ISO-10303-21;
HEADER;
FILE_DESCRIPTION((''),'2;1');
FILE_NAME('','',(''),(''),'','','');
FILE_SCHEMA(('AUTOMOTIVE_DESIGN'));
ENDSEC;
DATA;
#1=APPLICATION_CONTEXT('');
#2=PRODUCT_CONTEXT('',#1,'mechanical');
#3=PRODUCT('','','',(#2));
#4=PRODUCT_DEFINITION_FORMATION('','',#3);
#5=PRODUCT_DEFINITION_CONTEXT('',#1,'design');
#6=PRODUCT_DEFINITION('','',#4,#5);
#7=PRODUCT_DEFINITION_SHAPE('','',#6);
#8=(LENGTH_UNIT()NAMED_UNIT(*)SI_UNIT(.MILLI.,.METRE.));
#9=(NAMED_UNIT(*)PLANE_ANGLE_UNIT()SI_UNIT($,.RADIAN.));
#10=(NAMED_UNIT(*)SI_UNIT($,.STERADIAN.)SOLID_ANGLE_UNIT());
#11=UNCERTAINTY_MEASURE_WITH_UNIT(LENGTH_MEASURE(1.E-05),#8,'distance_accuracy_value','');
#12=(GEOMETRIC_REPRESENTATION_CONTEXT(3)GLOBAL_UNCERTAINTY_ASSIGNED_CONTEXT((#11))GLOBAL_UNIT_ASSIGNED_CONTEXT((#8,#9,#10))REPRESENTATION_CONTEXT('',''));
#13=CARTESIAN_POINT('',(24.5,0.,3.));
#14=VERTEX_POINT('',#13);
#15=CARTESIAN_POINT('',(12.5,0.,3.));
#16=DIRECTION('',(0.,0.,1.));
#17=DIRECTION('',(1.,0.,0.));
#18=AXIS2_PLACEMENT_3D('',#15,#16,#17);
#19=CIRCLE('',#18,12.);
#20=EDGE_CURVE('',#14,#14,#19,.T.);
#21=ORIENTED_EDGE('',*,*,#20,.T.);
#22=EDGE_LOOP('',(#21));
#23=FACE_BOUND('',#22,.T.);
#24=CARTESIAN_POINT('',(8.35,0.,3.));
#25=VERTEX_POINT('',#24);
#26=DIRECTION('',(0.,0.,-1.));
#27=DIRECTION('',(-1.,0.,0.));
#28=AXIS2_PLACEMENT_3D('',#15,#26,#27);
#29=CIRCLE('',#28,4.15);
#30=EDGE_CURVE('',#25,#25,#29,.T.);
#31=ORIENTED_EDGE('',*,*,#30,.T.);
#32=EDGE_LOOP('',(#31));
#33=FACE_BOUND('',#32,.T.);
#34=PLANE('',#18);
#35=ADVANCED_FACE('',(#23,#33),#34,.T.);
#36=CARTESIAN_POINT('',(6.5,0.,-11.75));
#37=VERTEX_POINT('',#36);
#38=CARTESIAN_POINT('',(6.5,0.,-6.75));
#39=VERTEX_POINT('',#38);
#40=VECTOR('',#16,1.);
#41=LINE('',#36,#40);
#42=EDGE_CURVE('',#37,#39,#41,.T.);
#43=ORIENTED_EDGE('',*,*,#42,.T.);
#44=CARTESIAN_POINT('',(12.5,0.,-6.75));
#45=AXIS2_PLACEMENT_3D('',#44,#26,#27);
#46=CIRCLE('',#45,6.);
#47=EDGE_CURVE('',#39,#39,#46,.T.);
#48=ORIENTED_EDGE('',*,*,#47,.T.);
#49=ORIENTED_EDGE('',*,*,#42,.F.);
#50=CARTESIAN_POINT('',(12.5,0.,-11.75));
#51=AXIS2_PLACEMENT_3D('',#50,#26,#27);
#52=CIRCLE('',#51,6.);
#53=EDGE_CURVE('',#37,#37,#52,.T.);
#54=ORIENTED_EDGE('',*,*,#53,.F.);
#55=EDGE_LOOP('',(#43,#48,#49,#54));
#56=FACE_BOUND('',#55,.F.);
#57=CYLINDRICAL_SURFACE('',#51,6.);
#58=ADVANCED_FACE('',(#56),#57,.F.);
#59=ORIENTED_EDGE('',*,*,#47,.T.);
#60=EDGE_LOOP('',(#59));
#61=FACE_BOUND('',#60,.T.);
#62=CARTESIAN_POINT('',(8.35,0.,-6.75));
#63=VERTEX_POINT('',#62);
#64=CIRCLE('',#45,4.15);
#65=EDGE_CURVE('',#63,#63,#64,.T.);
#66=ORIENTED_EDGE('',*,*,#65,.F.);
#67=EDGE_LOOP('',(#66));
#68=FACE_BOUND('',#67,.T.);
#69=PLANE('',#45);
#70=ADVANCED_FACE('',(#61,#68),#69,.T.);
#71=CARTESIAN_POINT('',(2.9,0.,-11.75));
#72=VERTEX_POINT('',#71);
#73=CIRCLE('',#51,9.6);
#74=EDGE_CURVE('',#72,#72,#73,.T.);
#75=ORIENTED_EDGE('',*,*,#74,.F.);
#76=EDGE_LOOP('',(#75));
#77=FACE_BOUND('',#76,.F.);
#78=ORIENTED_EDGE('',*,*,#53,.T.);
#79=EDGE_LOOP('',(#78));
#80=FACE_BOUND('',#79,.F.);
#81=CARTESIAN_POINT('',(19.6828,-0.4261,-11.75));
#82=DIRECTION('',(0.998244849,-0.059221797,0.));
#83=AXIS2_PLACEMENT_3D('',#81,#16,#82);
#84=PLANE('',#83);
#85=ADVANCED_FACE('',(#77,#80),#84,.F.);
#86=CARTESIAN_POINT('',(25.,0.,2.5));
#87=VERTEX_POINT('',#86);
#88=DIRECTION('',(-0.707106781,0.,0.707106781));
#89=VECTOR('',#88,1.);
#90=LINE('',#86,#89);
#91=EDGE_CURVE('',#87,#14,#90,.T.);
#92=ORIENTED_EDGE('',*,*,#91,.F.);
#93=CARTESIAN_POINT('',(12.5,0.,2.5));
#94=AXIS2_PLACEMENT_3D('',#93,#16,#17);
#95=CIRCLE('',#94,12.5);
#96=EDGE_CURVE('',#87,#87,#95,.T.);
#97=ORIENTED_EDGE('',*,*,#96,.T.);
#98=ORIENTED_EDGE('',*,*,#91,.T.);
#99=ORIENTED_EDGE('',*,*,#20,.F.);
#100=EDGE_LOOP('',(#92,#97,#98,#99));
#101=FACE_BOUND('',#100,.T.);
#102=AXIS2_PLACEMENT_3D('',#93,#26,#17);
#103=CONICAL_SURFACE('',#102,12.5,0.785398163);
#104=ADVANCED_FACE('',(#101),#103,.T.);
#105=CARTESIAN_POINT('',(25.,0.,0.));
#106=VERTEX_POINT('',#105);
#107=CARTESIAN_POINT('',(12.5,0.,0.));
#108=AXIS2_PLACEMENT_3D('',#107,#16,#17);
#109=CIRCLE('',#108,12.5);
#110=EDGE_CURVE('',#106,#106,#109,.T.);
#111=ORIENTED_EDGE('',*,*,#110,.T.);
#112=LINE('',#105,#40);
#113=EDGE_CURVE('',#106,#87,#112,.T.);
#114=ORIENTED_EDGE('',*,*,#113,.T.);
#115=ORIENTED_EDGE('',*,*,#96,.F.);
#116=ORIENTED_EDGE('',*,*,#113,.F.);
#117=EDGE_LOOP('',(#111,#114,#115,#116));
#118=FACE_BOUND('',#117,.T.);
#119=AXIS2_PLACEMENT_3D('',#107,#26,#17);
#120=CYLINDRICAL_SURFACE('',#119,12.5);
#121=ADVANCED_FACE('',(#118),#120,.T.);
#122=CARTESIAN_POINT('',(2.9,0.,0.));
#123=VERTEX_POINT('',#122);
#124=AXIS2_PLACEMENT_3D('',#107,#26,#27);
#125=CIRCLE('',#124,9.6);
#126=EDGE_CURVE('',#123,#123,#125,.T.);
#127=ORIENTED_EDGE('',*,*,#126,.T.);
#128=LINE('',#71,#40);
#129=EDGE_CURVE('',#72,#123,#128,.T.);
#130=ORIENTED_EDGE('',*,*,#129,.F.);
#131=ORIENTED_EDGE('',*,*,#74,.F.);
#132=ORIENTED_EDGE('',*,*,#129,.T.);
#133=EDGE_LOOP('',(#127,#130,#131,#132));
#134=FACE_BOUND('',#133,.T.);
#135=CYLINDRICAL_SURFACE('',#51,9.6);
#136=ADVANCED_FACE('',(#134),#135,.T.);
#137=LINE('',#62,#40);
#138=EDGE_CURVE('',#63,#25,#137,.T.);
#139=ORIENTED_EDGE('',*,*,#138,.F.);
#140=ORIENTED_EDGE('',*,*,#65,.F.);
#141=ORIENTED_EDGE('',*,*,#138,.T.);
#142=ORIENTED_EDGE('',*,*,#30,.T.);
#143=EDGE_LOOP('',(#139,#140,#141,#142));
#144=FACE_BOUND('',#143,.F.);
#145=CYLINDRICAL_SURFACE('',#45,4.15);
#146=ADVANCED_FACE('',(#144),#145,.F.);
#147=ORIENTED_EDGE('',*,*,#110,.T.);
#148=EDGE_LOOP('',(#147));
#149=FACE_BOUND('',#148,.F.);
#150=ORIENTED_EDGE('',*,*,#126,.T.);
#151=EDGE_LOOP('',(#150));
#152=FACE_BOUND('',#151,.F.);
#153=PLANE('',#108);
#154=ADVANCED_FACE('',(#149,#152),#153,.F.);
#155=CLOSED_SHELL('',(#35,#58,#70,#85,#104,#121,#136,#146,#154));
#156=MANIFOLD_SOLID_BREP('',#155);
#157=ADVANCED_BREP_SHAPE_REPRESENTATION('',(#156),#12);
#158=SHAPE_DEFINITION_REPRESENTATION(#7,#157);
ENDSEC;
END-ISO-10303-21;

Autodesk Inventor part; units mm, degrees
ref_plane "YZ Plane" through (0, 0, 0) normal (1, 0, 0) x (0, 1, 0)
ref_plane "XY Plane" through (0, 0, 0) normal (0, 0, 1) x (1, 0, 0)
ref_plane "РабПлоскость1" through (19.6828, -0.4261, 0) normal (0, 0, 1) x (0.9982449, -0.0592218, 0)
sketch "Эскиз1" plane through (19.6828, -0.4261, 0) normal (0, 0, 1) x (0.9982449, -0.0592218, 0)
  circle A0 centre (-7.1954, 0) radius 10 projected
  circle A1 centre (-7.1954, 0) radius 12.5 projected
  point P0 (-19.6734, -0.7403)
  point P1 (0.3275, 9.9828)
  point P2 (1.4551, -9.0233)
  point P3 (-15.8459, 9.0233)
  point P4 (-14.7183, -9.9828)
extrude "Выдавливание1" add sketch "Эскиз1" against normal blind 11.75 contours A0
sketch "Эскиз2" plane through (12.5, 0, 0) normal (0, 0, 1) x (1, 0, 0)
  circle A0 centre (0, 0) radius 12.5 projected
  point P0 (-12.5, 0)
extrude "Выдавливание2" add sketch "Эскиз2" along normal blind 3
chamfer "Фаска1" distance 0.5 angle 45 1 edges at (0, 0, 3)
sketch "Эскиз8" plane through (12.5, 0, -11.75) normal (0, 0, -1) x (-1, 0, 0)
  circle A0 centre (0, 0) radius 6
  point P0 (12.5, 0)
  dimension "d23" = 12
extrude "Выдавливание8" cut sketch "Эскиз8" against normal blind 5
sketch "Эскиз9" plane through (12.5, 0, -6.75) normal (0, 0, -1) x (-1, 0, 0)
  circle A0 centre (0, 0) radius 4.15
  circle A1 centre (0, 0) radius 6 projected
  point P0 (12.5, 0)
  dimension "d26" = 8.3
extrude "Выдавливание9" cut sketch "Эскиз9" against normal through all contours A0
ref_plane "РабПлоскость3" through (12.5, 10, 0) normal (0, 1, 0) x (-1, 0, 0)
sketch "Эскиз12" plane through (12.5, 0, -11.75) normal (0, 0, -1) x (-1, 0, 0)
  circle A0 centre (0, 0) radius 9.6
  circle A1 centre (0, 0) radius 10 projected
  point P0 (12.5, 0)
  dimension "d35" = 19.2
  dimension "d36" = 20
extrude "Выдавливание12" cut sketch "Эскиз12" against normal up to surface (11.75 mm away)
properties part number "bushing"
